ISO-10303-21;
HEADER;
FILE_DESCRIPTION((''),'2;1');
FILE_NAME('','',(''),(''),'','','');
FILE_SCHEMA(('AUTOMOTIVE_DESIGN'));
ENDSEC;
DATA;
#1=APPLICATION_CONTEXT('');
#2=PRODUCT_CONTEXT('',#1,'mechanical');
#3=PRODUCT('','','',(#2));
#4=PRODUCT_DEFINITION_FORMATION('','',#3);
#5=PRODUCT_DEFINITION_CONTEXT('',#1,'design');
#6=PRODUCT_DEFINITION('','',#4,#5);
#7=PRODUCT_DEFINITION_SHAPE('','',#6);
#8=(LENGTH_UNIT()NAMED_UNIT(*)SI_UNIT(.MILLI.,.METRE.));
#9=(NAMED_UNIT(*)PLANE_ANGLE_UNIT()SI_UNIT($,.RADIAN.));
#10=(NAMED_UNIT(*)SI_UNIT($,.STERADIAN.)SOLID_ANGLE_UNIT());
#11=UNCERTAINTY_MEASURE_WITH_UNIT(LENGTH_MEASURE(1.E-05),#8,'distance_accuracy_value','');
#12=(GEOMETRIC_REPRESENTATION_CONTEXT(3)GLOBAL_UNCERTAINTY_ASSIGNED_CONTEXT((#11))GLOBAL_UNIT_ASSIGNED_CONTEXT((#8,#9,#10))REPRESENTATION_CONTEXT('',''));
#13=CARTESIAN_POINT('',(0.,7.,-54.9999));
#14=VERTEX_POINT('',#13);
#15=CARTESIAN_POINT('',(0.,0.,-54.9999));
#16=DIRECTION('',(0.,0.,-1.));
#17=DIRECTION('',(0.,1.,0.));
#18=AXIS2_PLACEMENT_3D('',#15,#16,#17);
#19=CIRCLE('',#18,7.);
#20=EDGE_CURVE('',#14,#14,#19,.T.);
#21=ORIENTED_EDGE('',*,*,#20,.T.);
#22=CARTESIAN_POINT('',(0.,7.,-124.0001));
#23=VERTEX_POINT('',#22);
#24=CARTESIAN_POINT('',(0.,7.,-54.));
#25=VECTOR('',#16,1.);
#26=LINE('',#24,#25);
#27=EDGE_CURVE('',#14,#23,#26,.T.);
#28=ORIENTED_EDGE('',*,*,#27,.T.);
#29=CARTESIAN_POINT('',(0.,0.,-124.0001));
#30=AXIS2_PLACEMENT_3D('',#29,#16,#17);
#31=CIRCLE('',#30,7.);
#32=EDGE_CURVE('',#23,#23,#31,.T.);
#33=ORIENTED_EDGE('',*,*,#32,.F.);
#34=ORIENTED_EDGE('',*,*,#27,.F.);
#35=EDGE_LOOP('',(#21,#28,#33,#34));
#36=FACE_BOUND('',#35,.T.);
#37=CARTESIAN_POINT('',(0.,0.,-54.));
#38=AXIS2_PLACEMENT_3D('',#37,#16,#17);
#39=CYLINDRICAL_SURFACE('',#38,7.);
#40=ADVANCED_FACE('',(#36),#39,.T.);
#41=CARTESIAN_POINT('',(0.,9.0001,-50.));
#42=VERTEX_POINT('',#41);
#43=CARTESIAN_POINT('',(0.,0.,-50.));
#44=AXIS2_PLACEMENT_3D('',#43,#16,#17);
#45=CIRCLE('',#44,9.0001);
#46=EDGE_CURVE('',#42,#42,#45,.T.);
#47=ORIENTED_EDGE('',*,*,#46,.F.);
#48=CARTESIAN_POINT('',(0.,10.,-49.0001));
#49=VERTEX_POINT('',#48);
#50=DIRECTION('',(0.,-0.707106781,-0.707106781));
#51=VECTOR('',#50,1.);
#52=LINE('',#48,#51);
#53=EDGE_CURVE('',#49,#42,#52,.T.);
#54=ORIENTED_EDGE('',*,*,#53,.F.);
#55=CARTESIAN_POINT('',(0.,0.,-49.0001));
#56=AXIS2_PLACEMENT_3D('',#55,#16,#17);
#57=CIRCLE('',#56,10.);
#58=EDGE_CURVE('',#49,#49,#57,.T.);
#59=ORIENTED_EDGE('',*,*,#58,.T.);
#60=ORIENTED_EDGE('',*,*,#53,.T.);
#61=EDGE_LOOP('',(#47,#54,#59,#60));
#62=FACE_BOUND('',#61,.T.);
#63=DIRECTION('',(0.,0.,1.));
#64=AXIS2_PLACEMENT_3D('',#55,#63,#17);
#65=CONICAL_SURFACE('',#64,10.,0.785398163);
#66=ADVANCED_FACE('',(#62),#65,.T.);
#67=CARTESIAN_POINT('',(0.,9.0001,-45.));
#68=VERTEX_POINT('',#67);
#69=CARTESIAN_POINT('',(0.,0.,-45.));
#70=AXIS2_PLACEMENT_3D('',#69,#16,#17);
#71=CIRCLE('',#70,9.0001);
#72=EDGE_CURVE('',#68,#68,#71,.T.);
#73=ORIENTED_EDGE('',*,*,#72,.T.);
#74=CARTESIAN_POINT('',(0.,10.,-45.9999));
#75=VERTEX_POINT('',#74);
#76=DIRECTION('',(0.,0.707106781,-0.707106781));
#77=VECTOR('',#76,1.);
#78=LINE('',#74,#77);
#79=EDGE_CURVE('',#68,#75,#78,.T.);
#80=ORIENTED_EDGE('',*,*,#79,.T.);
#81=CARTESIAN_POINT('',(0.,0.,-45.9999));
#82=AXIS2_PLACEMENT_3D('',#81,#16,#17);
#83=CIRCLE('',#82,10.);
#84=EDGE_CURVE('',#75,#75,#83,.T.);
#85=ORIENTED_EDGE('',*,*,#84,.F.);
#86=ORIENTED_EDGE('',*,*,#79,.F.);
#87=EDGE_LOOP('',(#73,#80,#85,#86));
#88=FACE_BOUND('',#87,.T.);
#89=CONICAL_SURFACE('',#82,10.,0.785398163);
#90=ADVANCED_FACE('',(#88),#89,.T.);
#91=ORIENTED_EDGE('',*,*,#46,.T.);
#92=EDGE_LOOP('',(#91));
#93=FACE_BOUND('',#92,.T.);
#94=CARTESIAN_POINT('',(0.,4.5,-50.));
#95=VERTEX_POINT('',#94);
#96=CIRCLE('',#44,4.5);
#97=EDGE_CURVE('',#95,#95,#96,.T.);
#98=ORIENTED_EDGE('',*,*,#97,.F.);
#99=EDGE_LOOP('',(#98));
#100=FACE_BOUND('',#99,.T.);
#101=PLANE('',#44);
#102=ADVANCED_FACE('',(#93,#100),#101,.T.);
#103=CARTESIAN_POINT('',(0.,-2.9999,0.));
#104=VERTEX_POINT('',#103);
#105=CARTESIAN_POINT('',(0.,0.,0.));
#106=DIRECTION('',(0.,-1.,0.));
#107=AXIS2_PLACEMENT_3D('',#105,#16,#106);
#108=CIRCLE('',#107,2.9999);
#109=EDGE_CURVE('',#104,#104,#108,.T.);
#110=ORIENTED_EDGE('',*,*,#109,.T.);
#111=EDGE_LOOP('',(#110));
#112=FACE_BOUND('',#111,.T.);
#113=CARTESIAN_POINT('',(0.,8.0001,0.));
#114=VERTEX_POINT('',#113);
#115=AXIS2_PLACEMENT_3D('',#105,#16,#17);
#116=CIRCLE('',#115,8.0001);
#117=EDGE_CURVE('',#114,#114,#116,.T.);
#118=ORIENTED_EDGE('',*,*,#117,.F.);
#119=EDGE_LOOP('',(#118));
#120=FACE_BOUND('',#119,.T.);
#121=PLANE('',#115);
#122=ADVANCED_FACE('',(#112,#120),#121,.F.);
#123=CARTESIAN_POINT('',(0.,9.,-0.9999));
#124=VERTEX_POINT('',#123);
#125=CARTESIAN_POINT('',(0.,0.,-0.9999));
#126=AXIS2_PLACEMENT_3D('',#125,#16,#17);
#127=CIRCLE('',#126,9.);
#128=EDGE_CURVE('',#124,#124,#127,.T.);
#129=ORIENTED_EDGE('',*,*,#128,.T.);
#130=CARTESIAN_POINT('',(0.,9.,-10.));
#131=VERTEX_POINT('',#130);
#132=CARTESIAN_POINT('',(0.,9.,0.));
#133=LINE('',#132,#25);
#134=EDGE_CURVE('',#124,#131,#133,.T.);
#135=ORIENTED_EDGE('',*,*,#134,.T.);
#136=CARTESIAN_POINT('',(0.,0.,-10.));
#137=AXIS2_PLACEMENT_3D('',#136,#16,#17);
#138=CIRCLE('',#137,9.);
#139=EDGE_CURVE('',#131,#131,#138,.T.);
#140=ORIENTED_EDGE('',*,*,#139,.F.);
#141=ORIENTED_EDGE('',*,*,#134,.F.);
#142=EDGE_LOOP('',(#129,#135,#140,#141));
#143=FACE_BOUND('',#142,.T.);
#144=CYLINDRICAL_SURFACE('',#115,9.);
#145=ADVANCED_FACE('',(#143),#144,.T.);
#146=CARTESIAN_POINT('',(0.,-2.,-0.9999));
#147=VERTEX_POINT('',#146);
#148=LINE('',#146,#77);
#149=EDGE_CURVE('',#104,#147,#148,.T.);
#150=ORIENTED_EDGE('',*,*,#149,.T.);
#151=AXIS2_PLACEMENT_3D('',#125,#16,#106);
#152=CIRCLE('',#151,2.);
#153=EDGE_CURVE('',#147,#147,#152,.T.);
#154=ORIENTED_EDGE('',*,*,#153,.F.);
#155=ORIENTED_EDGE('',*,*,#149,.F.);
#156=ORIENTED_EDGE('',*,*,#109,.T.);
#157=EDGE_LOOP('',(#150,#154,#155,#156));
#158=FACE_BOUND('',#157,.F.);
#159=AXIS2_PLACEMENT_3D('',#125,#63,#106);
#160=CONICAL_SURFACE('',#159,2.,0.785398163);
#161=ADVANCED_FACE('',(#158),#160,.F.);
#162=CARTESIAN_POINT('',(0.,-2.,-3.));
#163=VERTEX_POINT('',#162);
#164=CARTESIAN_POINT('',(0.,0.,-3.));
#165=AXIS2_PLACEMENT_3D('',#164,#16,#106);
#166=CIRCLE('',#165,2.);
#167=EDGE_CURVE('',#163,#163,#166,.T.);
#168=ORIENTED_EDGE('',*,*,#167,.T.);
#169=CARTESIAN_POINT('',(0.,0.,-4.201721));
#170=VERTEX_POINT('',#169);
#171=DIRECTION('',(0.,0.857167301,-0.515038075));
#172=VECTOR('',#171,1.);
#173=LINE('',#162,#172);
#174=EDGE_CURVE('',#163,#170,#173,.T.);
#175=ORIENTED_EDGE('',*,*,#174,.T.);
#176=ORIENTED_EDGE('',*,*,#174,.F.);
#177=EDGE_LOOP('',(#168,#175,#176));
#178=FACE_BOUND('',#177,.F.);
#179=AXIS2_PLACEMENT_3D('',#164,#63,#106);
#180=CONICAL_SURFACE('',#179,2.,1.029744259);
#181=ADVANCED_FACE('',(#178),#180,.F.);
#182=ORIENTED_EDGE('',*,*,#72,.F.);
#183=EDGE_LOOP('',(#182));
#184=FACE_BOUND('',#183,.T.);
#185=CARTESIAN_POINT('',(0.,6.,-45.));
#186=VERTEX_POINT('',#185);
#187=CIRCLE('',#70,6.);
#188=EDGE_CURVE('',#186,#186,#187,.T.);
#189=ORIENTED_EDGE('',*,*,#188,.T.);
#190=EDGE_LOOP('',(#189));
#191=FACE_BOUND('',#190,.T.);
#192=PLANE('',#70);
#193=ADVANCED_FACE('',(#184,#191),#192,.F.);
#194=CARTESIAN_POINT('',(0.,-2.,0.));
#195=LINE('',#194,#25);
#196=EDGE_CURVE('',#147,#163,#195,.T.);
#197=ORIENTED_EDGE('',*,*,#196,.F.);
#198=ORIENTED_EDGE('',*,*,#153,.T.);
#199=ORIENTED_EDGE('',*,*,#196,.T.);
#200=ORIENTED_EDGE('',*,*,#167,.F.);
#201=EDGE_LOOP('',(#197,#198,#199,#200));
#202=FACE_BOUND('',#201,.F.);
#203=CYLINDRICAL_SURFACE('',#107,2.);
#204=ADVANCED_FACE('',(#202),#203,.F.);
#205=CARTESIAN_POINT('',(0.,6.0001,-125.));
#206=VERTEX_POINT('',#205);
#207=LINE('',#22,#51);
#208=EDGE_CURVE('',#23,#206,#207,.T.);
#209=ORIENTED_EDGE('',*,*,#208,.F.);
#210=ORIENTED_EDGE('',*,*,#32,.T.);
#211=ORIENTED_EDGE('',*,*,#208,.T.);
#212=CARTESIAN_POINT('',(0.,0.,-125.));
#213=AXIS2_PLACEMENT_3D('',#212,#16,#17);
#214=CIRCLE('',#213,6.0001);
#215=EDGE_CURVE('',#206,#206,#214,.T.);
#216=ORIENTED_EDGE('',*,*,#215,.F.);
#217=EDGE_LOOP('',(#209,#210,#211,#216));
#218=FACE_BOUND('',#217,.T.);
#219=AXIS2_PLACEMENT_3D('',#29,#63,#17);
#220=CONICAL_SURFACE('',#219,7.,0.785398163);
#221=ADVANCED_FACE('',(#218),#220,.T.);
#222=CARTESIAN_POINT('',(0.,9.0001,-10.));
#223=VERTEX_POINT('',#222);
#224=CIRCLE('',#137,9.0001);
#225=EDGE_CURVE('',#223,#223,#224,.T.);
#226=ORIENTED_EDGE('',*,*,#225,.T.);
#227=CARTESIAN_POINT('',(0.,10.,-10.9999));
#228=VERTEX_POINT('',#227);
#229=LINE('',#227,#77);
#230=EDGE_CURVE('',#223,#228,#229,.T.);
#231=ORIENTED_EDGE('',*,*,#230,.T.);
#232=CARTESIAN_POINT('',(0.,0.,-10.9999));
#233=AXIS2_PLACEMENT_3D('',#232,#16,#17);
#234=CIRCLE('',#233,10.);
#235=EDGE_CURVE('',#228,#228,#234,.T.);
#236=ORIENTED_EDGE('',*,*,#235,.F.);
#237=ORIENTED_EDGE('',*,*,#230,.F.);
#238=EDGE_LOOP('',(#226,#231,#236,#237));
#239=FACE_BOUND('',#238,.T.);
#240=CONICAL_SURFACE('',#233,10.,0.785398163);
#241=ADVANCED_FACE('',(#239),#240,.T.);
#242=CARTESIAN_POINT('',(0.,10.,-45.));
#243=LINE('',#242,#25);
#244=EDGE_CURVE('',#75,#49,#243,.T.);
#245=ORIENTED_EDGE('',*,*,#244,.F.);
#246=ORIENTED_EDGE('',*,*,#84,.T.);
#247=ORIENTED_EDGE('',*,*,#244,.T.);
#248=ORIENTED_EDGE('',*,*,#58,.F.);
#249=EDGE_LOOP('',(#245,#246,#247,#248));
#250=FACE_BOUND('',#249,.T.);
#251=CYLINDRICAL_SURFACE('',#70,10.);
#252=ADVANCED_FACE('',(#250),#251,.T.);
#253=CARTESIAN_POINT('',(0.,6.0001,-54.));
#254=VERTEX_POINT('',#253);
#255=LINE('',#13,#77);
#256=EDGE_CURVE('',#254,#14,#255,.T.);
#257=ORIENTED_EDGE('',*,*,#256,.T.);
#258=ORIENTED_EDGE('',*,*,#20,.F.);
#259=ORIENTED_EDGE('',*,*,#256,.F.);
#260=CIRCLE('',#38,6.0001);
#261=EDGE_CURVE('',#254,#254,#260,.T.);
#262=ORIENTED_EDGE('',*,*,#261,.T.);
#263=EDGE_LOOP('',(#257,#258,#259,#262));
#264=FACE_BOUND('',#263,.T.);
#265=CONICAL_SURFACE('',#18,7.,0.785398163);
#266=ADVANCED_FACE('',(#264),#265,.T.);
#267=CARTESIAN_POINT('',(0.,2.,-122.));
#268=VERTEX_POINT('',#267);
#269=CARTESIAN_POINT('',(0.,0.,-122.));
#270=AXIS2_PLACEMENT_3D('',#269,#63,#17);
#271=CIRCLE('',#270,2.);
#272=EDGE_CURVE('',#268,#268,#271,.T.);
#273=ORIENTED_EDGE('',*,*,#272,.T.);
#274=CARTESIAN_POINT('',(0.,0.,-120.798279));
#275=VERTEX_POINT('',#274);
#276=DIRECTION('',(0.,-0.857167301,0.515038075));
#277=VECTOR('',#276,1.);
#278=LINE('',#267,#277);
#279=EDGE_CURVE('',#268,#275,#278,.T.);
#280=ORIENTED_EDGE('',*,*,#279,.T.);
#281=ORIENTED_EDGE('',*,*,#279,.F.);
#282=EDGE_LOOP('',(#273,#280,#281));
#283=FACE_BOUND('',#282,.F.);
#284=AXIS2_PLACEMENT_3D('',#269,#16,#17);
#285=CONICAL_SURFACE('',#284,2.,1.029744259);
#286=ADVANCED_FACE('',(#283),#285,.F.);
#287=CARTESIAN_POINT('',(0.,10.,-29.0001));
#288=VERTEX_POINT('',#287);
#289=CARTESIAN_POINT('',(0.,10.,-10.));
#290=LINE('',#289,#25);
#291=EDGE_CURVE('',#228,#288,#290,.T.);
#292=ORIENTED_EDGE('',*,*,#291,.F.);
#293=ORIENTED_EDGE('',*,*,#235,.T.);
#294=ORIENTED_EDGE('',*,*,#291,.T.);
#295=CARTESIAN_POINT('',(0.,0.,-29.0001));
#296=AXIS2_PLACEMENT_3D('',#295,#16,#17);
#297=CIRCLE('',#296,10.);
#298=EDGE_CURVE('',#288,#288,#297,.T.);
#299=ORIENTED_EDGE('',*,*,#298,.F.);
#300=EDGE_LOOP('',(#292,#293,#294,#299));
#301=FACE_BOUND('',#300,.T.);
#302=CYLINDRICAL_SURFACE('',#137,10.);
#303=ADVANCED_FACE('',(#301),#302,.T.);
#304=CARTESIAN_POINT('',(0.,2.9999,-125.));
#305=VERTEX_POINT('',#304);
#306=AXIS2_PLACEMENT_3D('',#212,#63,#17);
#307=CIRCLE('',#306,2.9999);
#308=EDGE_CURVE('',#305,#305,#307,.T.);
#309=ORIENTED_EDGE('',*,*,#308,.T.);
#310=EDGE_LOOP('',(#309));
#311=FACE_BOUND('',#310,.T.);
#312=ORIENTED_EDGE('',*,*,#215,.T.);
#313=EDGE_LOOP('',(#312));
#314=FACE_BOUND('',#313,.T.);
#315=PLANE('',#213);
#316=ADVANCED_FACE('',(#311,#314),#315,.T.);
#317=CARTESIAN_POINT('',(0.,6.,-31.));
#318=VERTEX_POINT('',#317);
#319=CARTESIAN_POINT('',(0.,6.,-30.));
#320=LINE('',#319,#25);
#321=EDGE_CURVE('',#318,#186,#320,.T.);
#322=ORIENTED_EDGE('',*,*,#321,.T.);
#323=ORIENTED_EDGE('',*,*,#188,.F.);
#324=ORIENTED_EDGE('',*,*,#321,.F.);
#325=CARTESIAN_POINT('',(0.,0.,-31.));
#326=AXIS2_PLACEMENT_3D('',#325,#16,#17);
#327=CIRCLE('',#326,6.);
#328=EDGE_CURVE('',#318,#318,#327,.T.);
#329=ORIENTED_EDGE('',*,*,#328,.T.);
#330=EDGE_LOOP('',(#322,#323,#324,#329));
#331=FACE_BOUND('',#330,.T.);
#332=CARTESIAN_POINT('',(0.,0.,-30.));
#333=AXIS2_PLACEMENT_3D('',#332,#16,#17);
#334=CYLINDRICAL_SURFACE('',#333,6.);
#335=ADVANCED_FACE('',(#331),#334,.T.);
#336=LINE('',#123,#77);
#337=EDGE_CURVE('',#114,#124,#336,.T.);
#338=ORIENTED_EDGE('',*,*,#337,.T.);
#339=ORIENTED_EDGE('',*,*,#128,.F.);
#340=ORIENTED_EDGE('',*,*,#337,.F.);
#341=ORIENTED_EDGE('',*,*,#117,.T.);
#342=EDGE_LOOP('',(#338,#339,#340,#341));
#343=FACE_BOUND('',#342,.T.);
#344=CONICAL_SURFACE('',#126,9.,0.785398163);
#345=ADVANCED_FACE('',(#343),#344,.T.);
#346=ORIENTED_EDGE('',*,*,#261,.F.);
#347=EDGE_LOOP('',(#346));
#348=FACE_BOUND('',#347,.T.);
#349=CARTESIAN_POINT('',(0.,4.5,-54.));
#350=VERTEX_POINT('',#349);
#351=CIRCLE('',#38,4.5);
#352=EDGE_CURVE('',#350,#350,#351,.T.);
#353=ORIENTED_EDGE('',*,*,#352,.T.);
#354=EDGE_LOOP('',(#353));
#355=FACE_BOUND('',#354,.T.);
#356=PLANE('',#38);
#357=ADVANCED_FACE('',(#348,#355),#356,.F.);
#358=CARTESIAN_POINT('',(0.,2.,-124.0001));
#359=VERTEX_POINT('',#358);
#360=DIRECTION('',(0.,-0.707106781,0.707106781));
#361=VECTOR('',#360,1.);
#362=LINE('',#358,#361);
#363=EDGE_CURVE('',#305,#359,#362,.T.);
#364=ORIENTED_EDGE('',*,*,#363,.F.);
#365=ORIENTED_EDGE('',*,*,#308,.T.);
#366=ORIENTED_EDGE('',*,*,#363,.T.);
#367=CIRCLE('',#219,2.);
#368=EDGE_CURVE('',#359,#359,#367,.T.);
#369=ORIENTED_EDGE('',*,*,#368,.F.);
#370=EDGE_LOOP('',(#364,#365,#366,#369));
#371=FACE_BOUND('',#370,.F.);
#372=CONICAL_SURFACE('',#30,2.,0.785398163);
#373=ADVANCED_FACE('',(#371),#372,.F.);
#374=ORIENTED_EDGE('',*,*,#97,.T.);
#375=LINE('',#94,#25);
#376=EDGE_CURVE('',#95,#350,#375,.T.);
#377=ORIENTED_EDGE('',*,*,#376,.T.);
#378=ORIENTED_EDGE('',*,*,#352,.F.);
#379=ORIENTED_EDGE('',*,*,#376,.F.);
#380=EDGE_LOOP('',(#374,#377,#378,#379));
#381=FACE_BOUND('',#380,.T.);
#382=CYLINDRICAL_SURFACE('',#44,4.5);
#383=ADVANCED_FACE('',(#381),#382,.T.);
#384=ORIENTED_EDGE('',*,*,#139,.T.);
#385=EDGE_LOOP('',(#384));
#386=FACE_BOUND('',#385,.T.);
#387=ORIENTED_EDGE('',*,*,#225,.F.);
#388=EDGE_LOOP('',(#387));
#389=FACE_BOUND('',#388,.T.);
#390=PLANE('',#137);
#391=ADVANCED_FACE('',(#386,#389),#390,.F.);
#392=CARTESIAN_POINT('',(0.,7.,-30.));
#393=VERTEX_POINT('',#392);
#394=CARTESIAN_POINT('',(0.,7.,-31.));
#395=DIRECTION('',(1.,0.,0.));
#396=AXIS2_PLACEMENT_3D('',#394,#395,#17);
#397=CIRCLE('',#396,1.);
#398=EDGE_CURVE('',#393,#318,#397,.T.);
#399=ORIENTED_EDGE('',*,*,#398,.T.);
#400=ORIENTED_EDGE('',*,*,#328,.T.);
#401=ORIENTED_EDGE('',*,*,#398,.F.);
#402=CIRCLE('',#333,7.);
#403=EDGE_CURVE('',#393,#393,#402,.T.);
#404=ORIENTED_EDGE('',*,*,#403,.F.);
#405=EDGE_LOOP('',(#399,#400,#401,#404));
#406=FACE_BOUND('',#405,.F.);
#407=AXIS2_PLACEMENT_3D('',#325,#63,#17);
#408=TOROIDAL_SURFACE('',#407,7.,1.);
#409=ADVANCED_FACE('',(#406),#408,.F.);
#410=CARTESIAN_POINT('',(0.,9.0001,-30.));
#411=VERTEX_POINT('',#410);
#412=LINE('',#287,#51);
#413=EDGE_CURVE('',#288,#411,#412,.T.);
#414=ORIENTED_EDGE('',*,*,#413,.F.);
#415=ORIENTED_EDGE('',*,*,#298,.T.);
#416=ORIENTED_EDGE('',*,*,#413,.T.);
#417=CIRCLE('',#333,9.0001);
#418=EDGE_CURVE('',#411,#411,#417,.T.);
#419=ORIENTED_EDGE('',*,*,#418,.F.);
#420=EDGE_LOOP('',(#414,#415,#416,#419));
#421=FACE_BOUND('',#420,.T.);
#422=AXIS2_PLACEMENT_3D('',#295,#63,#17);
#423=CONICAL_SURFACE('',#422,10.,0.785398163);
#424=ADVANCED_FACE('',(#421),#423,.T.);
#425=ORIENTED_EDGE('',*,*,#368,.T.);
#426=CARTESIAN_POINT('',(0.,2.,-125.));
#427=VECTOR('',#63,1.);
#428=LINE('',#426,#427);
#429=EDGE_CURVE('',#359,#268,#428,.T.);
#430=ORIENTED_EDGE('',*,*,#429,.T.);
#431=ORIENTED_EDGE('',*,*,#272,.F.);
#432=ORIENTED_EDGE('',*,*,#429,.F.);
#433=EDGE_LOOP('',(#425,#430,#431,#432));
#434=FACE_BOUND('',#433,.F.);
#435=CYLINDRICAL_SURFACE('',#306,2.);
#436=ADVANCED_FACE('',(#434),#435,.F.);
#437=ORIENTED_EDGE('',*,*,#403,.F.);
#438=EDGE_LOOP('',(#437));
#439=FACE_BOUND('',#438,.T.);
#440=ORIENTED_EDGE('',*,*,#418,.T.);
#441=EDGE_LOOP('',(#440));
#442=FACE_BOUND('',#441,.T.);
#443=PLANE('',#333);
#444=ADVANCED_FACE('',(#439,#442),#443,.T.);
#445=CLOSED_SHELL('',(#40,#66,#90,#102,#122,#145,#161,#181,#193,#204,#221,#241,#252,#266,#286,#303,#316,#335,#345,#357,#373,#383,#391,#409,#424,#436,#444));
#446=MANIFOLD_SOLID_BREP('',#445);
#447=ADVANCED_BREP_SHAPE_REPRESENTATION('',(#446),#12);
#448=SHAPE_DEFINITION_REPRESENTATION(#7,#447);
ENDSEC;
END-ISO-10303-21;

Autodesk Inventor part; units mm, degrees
ref_plane "YZ Plane" through (0, 0, 0) normal (1, 0, 0) x (0, 1, 0)
ref_plane "XZ Plane" through (0, 0, 0) normal (0, 1, 0) x (-1, 0, 0)
ref_plane "XY Plane" through (0, 0, 0) normal (0, 0, 1) x (1, 0, 0)
sketch "Sketch1" plane through (0, 0, 0) normal (1, 0, 0) x (0, 1, 0)
  line L0 (0, 0) -> (9, 0)
  line L1 (9, 0) -> (9, -10)
  line L2 (9, -10) -> (10, -10)
  line L3 (10, -10) -> (10, -30)
  line L4 (10, -30) -> (6, -30)
  line L5 (6, -30) -> (6, -45)
  line L6 (6, -45) -> (10, -45)
  line L7 (10, -45) -> (10, -50)
  line L8 (0, 0) -> (0, -125)
  line L9 (10, -50) -> (4.5, -50)
  line L10 (4.5, -50) -> (4.5, -54)
  line L11 (4.5, -54) -> (7, -54)
  line L12 (7, -54) -> (7, -125)
  line L13 (7, -125) -> (0, -125)
  dimension "d1" = 18
  dimension "d2" = 20
  dimension "d3" = 12
  dimension "d4" = 20
  dimension "d5" = 9
  dimension "d6" = 14
  dimension "d7" = 20
  dimension "d8" = 15
  dimension "d9" = 4
  dimension "d10" = 5
  dimension "d11" = 71
  dimension "d12" = 125
revolve "Revolution1" add sketch "Sketch1" angle 360 about axis through (0, 0, 0) along (0, 0, -1)
thread "Thread1" size "M14x2" class "6g" standard "ANSI Metric M Profile" full length
hole "Hole1" at (0, 0, 0) direction (0, 0, -1) diameter 4 depth 3 tip angle 118
sketch "Sketch2" plane through (0, 0, -125) normal (0, 0, -1) x (-1, 0, 0)
  point P0 (0, 0)
  point P1 (0, 0)
hole "Hole2" at (0, 0, -125) direction (0, 0, 1) diameter 4 depth 3 tip angle 118
chamfer "Chamfer1" distance 1 angle 45 9 edges at (0, -9, 0) (0, 2, 0) (0, -10, -10) (0, -10, -45) (0, -10, -50) (0, -7, -54) (0, -7, -125) (0, -2, -125) (0, -10, -30)
fillet "Fillet1" radius 1 1 edges at (0, -6, -30)
properties part number "b7"
